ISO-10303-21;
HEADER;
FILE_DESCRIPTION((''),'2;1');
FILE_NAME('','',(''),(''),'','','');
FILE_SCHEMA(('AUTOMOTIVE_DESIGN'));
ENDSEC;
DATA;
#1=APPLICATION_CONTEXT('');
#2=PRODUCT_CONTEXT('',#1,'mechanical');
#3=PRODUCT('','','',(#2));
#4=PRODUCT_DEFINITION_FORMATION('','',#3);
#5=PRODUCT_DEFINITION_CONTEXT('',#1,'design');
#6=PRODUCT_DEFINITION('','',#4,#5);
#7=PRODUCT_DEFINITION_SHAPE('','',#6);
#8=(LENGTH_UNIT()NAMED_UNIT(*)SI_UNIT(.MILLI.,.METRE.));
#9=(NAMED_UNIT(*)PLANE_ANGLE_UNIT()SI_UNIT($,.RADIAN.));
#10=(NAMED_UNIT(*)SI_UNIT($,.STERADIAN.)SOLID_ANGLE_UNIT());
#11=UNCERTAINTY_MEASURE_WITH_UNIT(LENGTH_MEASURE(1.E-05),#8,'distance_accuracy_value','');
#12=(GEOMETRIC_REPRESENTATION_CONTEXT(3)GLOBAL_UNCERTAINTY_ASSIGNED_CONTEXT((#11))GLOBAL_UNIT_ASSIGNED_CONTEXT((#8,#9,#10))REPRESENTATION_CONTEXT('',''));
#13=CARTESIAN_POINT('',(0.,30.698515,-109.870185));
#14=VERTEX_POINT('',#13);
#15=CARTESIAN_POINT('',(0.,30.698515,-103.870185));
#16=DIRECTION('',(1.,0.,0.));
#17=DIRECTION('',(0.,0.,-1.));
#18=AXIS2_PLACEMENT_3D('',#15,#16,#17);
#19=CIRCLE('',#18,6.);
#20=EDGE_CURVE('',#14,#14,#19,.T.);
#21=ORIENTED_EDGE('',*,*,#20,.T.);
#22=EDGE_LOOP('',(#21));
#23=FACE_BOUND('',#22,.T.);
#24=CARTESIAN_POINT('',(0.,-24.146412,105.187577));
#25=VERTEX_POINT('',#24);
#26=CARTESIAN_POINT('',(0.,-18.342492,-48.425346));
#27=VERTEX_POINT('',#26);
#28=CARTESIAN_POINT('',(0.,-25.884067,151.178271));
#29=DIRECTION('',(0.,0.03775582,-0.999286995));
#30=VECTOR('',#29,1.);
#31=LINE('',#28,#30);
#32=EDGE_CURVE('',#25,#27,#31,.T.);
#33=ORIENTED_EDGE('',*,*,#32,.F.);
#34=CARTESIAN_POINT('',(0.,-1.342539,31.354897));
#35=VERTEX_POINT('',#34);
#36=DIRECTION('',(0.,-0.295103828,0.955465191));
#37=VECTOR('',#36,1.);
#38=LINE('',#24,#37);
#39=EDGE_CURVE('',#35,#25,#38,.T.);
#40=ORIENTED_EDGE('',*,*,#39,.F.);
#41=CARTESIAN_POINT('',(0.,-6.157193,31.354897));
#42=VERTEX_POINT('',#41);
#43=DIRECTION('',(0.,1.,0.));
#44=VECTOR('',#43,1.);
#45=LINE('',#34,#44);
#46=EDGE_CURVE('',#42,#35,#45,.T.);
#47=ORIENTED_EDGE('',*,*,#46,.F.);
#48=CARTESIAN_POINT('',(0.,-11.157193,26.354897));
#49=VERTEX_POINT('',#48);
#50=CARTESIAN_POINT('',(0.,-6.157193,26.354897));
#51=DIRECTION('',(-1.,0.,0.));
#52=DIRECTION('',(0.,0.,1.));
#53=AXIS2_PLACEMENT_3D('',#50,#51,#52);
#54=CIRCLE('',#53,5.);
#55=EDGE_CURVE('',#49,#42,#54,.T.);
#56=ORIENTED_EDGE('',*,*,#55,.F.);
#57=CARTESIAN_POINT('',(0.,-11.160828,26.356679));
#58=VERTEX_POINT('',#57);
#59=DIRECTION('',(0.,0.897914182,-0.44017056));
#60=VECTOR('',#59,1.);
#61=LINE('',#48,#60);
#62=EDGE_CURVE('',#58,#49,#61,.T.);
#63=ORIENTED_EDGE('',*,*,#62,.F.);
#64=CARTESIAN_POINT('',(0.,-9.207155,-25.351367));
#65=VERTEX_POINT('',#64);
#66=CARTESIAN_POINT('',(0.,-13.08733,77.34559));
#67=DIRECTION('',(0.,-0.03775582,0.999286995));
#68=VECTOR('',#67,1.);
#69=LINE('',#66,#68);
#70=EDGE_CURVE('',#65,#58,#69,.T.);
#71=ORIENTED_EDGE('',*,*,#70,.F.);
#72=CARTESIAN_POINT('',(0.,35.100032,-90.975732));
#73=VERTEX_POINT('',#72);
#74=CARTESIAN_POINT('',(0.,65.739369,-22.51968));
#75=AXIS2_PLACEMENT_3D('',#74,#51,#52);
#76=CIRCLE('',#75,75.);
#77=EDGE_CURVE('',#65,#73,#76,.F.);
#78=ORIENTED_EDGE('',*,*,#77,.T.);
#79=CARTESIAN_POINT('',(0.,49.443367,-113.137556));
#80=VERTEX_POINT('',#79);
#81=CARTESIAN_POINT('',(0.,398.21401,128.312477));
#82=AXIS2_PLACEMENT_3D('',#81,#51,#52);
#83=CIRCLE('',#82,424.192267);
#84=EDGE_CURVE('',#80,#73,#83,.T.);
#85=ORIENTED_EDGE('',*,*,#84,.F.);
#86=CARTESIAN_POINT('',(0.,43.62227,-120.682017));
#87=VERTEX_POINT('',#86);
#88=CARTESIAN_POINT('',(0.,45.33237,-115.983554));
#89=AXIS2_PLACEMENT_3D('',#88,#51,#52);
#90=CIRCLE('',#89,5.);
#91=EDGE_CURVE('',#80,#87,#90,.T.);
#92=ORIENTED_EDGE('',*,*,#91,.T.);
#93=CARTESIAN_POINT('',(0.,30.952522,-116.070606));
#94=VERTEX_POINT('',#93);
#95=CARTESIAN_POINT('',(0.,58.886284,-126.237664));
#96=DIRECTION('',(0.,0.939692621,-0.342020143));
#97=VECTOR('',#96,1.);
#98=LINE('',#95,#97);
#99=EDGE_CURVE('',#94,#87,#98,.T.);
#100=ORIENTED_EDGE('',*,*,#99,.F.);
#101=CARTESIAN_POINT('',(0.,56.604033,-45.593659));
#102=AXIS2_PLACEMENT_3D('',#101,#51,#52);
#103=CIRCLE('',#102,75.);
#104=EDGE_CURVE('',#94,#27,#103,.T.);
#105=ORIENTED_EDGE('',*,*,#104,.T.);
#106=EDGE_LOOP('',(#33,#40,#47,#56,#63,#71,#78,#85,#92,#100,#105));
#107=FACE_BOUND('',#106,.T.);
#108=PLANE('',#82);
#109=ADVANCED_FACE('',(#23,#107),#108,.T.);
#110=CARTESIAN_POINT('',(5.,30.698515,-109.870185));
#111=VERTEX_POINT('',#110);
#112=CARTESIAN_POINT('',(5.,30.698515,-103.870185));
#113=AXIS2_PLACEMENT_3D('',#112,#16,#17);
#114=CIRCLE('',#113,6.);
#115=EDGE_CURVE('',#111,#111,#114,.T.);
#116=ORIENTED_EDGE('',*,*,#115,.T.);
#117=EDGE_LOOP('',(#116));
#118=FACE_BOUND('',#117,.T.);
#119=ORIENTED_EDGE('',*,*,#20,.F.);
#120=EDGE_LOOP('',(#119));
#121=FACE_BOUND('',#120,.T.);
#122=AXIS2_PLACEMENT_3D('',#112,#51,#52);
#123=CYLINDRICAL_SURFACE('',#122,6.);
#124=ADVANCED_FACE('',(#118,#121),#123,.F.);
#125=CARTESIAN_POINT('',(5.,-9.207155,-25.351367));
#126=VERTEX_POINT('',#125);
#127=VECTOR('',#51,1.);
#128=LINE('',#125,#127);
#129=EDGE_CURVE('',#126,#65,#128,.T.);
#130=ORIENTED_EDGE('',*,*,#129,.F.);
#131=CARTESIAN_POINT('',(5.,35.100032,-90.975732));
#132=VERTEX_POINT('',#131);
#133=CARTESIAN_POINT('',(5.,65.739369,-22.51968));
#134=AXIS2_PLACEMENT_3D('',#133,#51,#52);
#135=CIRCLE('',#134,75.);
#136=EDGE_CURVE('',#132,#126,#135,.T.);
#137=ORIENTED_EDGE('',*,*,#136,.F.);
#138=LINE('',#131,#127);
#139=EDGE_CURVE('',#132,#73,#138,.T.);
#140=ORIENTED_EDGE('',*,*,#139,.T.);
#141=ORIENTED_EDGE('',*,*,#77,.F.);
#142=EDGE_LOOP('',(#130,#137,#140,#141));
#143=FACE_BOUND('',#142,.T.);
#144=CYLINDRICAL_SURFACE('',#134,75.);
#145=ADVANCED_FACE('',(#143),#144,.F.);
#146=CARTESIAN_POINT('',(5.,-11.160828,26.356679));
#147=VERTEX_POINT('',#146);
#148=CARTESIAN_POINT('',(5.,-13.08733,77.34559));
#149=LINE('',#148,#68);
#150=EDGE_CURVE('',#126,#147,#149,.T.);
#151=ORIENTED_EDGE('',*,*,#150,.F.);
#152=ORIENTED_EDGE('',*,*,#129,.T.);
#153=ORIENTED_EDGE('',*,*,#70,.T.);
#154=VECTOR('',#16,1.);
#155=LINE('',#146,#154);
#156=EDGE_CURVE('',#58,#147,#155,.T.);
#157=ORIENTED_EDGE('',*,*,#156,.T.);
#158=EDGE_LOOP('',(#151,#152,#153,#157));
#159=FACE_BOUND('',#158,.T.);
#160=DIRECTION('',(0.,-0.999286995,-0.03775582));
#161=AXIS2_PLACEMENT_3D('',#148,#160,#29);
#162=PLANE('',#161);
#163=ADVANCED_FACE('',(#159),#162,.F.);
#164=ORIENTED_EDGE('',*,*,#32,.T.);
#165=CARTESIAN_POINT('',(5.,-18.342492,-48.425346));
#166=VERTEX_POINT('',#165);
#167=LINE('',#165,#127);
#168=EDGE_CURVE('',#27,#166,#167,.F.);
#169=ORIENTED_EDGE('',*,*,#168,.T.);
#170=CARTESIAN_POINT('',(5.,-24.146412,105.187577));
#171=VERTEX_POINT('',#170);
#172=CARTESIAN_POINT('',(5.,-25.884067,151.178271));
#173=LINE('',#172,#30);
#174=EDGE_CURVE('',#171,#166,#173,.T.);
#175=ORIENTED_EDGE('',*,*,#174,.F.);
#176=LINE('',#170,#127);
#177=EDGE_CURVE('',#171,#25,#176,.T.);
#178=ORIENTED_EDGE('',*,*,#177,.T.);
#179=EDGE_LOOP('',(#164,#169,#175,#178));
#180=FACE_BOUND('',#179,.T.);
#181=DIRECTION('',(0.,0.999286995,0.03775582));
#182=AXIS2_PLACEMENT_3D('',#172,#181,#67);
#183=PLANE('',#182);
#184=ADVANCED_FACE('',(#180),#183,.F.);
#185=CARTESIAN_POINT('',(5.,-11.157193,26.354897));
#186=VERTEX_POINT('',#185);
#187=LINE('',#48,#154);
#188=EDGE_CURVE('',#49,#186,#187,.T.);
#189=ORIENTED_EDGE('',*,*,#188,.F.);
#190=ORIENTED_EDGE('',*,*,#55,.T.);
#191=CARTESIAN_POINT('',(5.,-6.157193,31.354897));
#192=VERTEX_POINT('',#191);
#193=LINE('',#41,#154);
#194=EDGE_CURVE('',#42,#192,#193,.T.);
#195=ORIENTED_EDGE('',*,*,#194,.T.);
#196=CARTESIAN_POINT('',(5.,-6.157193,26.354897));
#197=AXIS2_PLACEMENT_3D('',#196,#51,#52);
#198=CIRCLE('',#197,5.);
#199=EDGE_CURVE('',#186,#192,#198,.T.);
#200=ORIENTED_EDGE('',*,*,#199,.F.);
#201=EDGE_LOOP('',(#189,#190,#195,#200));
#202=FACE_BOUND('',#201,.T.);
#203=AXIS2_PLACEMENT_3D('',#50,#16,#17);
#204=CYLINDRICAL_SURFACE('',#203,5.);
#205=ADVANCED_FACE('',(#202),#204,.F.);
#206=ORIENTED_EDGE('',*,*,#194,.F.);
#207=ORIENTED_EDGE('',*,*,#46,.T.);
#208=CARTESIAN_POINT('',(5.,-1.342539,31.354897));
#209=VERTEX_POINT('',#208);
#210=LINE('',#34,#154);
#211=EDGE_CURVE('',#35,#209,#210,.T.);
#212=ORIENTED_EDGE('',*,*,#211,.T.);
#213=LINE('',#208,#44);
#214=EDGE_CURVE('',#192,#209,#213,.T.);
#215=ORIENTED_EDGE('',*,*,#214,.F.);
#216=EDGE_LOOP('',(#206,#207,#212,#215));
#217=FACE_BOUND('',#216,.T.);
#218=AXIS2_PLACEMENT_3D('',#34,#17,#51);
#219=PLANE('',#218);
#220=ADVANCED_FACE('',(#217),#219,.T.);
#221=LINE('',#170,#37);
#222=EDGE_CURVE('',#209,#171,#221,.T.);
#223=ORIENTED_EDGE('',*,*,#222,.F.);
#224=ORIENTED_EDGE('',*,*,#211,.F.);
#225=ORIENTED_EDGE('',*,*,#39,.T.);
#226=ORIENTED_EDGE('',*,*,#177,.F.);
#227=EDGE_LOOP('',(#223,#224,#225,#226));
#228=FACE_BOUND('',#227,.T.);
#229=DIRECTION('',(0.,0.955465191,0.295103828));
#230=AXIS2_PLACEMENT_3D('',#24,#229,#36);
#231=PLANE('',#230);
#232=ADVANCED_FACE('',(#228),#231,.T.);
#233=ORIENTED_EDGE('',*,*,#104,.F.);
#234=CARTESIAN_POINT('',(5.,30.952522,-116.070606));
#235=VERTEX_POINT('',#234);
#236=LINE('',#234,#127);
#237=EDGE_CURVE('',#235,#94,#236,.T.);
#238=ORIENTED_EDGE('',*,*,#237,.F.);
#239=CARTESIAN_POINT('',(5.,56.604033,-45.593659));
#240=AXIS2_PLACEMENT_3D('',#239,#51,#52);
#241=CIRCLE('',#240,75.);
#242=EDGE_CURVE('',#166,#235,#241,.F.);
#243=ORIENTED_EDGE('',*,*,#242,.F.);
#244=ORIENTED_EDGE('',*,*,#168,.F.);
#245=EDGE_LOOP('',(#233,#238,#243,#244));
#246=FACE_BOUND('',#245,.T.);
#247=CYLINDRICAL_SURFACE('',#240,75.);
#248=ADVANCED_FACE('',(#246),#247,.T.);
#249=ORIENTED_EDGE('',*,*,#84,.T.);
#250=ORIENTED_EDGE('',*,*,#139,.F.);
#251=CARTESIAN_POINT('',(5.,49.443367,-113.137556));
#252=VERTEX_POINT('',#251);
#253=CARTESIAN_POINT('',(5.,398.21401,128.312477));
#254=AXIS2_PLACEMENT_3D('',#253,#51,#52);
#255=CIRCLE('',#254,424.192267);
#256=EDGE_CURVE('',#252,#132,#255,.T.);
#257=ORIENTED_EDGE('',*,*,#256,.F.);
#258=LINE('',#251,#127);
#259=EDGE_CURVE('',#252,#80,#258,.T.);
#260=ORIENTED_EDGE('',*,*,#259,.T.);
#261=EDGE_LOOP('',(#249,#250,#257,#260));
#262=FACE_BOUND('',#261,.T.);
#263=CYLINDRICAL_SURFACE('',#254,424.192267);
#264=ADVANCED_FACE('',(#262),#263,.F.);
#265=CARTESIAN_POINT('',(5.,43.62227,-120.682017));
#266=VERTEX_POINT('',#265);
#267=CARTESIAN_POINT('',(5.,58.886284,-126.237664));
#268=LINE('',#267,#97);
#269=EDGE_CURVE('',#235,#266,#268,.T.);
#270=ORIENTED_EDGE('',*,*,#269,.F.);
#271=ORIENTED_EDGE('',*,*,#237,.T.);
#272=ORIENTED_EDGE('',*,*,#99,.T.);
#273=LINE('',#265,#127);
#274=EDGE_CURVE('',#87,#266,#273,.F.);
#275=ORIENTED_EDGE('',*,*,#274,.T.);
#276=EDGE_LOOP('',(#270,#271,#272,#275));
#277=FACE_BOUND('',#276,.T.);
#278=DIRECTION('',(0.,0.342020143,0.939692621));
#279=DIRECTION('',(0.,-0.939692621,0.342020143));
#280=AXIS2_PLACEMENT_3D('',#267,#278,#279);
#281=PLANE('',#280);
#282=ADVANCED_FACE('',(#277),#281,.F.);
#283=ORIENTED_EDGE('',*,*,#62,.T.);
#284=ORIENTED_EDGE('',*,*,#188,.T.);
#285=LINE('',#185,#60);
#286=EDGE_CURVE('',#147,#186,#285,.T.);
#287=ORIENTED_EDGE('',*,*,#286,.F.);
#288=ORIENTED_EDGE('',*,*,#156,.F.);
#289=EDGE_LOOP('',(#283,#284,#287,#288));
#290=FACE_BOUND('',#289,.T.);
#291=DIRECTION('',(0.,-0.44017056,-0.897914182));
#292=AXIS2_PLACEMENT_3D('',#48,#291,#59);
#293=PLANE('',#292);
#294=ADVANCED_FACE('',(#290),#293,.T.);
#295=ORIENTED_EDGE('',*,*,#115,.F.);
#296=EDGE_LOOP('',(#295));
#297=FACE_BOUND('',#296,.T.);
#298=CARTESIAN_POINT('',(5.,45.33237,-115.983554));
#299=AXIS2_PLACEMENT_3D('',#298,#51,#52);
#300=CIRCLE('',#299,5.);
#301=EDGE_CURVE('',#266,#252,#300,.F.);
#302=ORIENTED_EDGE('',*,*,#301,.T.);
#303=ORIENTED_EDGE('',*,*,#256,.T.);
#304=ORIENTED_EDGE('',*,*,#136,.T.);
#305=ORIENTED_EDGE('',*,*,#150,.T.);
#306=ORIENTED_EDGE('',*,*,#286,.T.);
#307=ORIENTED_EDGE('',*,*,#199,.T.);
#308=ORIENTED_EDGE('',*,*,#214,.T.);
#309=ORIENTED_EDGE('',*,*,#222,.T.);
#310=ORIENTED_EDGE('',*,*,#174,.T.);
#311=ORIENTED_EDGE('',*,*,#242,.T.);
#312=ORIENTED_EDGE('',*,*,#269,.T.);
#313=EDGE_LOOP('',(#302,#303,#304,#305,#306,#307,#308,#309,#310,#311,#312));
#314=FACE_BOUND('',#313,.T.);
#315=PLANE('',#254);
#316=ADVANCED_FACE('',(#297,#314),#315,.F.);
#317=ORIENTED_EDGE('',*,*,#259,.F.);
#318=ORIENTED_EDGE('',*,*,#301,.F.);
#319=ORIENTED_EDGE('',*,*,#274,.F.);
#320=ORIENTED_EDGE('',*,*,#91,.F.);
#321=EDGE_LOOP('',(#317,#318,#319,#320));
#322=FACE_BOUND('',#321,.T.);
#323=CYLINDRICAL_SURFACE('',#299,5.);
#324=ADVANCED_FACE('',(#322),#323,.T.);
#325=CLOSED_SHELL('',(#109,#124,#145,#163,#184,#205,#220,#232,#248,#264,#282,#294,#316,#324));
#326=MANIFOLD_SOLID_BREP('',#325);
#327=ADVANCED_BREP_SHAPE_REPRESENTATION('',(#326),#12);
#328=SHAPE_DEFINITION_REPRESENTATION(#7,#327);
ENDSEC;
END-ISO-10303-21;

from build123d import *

# Parameters (mm, degrees)
SKETCH_1_R          = 6
EXTRUDE_1_DEPTH     = 5
FILLET_1_R          = 5
FILLET_2_R          = 75
FILLET_3_R          = 5
EXTRUDE_2_DEPTH     = 5
CUT_EXTRUDE_2_DEPTH = 160.415234704


with BuildPart() as part:
    # Эскиз1 → Бобышка-Вытянуть1 (new body)
    with BuildSketch(Plane(origin=(0, 0, 0), x_dir=(0, 0, -1), z_dir=(1, 0, 0))):
        with BuildLine():
            Line((126.237664014, 58.886284382), (98.821729218, -16.438377404))
            Line((98.821729218, -16.438377404), (-151.178270782, -25.884067346))
            Line((-151.178270782, -25.884067346), (-77.345590471, -3.080194644))
            Line((-77.345590471, -3.080194644), (-77.345590471, -13.087329783))
            Line((-77.345590471, -13.087329783), (75.539410437, -7.310912522))
            Line((75.539410437, -7.310912522), (90.975731778, 35.100031802))
            ThreePointArc((90.975731778, 35.100031802), (108.905022115, 46.550907327), (126.237664014, 58.886284382))
        make_face()
        with Locations((103.870185422, 30.698515365)):
            Circle(SKETCH_1_R, mode=Mode.SUBTRACT)
    extrude(amount=EXTRUDE_1_DEPTH)

    # Скругление1
    fillet_1_edges = [part.edges().sort_by_distance(p)[0] for p in [
        (2.5, -13.087329783, 77.345590471),
    ]]
    fillet(fillet_1_edges, radius=FILLET_1_R)

    # Скругление2
    # the kernel refuses this fillet: 75 mm, written as the material it adds along each edge
    with BuildSketch(Plane(origin=(0, -7.310912522, -75.539410437), x_dir=(0, -0.037755820465347284, 0.9992869948223027), z_dir=(1, 0, 0))) as fillet_2_piece_1:
        with BuildLine():
            CenterArc((50.223853574, -75), FILLET_2_R, 90, 63.724056715)
            Line((-17.026575163, -41.797894123), (0, 0))
            Line((0, 0), (50.223853574, 0))
        make_face()
    extrude(amount=5)
    # the kernel refuses this fillet: 75 mm, written as the material it takes off along each edge
    with BuildSketch(Plane(origin=(-126.080854452, -16.438377404, -98.821729218), x_dir=(0, -0.03775582046534733, 0.9992869948223025), z_dir=(1, 0, 0))) as fillet_2_2_piece_1:
        with BuildLine():
            CenterArc((FILLET_2_R * 0.672431223743, -FILLET_2_R), FILLET_2_R, 90, 67.836236553)
            Line((-FILLET_2_R * 0.253678140212, -FILLET_2_R * 0.622744852924), (0, 0))
            Line((0, 0), (FILLET_2_R * 0.672431223743, 0))
        make_face()
    extrude(amount=257.161708904, mode=Mode.SUBTRACT)

    # Скругление3
    fillet_3_edges = [part.edges().sort_by_distance(p)[0] for p in [
        (2.5, 58.886284382, -126.237664014),
    ]]
    fillet(fillet_3_edges, radius=FILLET_3_R)

    # Эскиз4 → Бобышка-Вытянуть2 (add)
    with BuildSketch(Plane(origin=(5, 0, 0), x_dir=(0, 0, -1), z_dir=(1, 0, 0))):
        with BuildLine():
            Line((-105.187577254, -24.146412021), (-31.354896943, -1.342539319))
            Line((-31.354896943, -1.342539319), (-31.354896943, -6.15719309))
            ThreePointArc((-31.354896943, -6.15719309), (-29.890430849, -9.692726996), (-26.354896943, -11.15719309))
            Line((-26.354896943, -11.15719309), (-31.354896943, -21.356809597))
            Line((-31.354896943, -21.356809597), (-105.187577254, -24.146412021))
        make_face()
    extrude(amount=-EXTRUDE_2_DEPTH)

    # Эскиз5 → Вырез-Вытянуть2 (cut, through all)
    with BuildSketch(Plane(origin=(5, 0, 0), x_dir=(0, 0, -1), z_dir=(1, 0, 0))):
        Polygon((-38.471521652, -3.540571454), (-146.983243384, -37.055371114), (-175.325798577, -14.870573448), (-65.732340229, 27.748343591), align=None)
    extrude(amount=-CUT_EXTRUDE_2_DEPTH, mode=Mode.SUBTRACT)


solid = part.part
